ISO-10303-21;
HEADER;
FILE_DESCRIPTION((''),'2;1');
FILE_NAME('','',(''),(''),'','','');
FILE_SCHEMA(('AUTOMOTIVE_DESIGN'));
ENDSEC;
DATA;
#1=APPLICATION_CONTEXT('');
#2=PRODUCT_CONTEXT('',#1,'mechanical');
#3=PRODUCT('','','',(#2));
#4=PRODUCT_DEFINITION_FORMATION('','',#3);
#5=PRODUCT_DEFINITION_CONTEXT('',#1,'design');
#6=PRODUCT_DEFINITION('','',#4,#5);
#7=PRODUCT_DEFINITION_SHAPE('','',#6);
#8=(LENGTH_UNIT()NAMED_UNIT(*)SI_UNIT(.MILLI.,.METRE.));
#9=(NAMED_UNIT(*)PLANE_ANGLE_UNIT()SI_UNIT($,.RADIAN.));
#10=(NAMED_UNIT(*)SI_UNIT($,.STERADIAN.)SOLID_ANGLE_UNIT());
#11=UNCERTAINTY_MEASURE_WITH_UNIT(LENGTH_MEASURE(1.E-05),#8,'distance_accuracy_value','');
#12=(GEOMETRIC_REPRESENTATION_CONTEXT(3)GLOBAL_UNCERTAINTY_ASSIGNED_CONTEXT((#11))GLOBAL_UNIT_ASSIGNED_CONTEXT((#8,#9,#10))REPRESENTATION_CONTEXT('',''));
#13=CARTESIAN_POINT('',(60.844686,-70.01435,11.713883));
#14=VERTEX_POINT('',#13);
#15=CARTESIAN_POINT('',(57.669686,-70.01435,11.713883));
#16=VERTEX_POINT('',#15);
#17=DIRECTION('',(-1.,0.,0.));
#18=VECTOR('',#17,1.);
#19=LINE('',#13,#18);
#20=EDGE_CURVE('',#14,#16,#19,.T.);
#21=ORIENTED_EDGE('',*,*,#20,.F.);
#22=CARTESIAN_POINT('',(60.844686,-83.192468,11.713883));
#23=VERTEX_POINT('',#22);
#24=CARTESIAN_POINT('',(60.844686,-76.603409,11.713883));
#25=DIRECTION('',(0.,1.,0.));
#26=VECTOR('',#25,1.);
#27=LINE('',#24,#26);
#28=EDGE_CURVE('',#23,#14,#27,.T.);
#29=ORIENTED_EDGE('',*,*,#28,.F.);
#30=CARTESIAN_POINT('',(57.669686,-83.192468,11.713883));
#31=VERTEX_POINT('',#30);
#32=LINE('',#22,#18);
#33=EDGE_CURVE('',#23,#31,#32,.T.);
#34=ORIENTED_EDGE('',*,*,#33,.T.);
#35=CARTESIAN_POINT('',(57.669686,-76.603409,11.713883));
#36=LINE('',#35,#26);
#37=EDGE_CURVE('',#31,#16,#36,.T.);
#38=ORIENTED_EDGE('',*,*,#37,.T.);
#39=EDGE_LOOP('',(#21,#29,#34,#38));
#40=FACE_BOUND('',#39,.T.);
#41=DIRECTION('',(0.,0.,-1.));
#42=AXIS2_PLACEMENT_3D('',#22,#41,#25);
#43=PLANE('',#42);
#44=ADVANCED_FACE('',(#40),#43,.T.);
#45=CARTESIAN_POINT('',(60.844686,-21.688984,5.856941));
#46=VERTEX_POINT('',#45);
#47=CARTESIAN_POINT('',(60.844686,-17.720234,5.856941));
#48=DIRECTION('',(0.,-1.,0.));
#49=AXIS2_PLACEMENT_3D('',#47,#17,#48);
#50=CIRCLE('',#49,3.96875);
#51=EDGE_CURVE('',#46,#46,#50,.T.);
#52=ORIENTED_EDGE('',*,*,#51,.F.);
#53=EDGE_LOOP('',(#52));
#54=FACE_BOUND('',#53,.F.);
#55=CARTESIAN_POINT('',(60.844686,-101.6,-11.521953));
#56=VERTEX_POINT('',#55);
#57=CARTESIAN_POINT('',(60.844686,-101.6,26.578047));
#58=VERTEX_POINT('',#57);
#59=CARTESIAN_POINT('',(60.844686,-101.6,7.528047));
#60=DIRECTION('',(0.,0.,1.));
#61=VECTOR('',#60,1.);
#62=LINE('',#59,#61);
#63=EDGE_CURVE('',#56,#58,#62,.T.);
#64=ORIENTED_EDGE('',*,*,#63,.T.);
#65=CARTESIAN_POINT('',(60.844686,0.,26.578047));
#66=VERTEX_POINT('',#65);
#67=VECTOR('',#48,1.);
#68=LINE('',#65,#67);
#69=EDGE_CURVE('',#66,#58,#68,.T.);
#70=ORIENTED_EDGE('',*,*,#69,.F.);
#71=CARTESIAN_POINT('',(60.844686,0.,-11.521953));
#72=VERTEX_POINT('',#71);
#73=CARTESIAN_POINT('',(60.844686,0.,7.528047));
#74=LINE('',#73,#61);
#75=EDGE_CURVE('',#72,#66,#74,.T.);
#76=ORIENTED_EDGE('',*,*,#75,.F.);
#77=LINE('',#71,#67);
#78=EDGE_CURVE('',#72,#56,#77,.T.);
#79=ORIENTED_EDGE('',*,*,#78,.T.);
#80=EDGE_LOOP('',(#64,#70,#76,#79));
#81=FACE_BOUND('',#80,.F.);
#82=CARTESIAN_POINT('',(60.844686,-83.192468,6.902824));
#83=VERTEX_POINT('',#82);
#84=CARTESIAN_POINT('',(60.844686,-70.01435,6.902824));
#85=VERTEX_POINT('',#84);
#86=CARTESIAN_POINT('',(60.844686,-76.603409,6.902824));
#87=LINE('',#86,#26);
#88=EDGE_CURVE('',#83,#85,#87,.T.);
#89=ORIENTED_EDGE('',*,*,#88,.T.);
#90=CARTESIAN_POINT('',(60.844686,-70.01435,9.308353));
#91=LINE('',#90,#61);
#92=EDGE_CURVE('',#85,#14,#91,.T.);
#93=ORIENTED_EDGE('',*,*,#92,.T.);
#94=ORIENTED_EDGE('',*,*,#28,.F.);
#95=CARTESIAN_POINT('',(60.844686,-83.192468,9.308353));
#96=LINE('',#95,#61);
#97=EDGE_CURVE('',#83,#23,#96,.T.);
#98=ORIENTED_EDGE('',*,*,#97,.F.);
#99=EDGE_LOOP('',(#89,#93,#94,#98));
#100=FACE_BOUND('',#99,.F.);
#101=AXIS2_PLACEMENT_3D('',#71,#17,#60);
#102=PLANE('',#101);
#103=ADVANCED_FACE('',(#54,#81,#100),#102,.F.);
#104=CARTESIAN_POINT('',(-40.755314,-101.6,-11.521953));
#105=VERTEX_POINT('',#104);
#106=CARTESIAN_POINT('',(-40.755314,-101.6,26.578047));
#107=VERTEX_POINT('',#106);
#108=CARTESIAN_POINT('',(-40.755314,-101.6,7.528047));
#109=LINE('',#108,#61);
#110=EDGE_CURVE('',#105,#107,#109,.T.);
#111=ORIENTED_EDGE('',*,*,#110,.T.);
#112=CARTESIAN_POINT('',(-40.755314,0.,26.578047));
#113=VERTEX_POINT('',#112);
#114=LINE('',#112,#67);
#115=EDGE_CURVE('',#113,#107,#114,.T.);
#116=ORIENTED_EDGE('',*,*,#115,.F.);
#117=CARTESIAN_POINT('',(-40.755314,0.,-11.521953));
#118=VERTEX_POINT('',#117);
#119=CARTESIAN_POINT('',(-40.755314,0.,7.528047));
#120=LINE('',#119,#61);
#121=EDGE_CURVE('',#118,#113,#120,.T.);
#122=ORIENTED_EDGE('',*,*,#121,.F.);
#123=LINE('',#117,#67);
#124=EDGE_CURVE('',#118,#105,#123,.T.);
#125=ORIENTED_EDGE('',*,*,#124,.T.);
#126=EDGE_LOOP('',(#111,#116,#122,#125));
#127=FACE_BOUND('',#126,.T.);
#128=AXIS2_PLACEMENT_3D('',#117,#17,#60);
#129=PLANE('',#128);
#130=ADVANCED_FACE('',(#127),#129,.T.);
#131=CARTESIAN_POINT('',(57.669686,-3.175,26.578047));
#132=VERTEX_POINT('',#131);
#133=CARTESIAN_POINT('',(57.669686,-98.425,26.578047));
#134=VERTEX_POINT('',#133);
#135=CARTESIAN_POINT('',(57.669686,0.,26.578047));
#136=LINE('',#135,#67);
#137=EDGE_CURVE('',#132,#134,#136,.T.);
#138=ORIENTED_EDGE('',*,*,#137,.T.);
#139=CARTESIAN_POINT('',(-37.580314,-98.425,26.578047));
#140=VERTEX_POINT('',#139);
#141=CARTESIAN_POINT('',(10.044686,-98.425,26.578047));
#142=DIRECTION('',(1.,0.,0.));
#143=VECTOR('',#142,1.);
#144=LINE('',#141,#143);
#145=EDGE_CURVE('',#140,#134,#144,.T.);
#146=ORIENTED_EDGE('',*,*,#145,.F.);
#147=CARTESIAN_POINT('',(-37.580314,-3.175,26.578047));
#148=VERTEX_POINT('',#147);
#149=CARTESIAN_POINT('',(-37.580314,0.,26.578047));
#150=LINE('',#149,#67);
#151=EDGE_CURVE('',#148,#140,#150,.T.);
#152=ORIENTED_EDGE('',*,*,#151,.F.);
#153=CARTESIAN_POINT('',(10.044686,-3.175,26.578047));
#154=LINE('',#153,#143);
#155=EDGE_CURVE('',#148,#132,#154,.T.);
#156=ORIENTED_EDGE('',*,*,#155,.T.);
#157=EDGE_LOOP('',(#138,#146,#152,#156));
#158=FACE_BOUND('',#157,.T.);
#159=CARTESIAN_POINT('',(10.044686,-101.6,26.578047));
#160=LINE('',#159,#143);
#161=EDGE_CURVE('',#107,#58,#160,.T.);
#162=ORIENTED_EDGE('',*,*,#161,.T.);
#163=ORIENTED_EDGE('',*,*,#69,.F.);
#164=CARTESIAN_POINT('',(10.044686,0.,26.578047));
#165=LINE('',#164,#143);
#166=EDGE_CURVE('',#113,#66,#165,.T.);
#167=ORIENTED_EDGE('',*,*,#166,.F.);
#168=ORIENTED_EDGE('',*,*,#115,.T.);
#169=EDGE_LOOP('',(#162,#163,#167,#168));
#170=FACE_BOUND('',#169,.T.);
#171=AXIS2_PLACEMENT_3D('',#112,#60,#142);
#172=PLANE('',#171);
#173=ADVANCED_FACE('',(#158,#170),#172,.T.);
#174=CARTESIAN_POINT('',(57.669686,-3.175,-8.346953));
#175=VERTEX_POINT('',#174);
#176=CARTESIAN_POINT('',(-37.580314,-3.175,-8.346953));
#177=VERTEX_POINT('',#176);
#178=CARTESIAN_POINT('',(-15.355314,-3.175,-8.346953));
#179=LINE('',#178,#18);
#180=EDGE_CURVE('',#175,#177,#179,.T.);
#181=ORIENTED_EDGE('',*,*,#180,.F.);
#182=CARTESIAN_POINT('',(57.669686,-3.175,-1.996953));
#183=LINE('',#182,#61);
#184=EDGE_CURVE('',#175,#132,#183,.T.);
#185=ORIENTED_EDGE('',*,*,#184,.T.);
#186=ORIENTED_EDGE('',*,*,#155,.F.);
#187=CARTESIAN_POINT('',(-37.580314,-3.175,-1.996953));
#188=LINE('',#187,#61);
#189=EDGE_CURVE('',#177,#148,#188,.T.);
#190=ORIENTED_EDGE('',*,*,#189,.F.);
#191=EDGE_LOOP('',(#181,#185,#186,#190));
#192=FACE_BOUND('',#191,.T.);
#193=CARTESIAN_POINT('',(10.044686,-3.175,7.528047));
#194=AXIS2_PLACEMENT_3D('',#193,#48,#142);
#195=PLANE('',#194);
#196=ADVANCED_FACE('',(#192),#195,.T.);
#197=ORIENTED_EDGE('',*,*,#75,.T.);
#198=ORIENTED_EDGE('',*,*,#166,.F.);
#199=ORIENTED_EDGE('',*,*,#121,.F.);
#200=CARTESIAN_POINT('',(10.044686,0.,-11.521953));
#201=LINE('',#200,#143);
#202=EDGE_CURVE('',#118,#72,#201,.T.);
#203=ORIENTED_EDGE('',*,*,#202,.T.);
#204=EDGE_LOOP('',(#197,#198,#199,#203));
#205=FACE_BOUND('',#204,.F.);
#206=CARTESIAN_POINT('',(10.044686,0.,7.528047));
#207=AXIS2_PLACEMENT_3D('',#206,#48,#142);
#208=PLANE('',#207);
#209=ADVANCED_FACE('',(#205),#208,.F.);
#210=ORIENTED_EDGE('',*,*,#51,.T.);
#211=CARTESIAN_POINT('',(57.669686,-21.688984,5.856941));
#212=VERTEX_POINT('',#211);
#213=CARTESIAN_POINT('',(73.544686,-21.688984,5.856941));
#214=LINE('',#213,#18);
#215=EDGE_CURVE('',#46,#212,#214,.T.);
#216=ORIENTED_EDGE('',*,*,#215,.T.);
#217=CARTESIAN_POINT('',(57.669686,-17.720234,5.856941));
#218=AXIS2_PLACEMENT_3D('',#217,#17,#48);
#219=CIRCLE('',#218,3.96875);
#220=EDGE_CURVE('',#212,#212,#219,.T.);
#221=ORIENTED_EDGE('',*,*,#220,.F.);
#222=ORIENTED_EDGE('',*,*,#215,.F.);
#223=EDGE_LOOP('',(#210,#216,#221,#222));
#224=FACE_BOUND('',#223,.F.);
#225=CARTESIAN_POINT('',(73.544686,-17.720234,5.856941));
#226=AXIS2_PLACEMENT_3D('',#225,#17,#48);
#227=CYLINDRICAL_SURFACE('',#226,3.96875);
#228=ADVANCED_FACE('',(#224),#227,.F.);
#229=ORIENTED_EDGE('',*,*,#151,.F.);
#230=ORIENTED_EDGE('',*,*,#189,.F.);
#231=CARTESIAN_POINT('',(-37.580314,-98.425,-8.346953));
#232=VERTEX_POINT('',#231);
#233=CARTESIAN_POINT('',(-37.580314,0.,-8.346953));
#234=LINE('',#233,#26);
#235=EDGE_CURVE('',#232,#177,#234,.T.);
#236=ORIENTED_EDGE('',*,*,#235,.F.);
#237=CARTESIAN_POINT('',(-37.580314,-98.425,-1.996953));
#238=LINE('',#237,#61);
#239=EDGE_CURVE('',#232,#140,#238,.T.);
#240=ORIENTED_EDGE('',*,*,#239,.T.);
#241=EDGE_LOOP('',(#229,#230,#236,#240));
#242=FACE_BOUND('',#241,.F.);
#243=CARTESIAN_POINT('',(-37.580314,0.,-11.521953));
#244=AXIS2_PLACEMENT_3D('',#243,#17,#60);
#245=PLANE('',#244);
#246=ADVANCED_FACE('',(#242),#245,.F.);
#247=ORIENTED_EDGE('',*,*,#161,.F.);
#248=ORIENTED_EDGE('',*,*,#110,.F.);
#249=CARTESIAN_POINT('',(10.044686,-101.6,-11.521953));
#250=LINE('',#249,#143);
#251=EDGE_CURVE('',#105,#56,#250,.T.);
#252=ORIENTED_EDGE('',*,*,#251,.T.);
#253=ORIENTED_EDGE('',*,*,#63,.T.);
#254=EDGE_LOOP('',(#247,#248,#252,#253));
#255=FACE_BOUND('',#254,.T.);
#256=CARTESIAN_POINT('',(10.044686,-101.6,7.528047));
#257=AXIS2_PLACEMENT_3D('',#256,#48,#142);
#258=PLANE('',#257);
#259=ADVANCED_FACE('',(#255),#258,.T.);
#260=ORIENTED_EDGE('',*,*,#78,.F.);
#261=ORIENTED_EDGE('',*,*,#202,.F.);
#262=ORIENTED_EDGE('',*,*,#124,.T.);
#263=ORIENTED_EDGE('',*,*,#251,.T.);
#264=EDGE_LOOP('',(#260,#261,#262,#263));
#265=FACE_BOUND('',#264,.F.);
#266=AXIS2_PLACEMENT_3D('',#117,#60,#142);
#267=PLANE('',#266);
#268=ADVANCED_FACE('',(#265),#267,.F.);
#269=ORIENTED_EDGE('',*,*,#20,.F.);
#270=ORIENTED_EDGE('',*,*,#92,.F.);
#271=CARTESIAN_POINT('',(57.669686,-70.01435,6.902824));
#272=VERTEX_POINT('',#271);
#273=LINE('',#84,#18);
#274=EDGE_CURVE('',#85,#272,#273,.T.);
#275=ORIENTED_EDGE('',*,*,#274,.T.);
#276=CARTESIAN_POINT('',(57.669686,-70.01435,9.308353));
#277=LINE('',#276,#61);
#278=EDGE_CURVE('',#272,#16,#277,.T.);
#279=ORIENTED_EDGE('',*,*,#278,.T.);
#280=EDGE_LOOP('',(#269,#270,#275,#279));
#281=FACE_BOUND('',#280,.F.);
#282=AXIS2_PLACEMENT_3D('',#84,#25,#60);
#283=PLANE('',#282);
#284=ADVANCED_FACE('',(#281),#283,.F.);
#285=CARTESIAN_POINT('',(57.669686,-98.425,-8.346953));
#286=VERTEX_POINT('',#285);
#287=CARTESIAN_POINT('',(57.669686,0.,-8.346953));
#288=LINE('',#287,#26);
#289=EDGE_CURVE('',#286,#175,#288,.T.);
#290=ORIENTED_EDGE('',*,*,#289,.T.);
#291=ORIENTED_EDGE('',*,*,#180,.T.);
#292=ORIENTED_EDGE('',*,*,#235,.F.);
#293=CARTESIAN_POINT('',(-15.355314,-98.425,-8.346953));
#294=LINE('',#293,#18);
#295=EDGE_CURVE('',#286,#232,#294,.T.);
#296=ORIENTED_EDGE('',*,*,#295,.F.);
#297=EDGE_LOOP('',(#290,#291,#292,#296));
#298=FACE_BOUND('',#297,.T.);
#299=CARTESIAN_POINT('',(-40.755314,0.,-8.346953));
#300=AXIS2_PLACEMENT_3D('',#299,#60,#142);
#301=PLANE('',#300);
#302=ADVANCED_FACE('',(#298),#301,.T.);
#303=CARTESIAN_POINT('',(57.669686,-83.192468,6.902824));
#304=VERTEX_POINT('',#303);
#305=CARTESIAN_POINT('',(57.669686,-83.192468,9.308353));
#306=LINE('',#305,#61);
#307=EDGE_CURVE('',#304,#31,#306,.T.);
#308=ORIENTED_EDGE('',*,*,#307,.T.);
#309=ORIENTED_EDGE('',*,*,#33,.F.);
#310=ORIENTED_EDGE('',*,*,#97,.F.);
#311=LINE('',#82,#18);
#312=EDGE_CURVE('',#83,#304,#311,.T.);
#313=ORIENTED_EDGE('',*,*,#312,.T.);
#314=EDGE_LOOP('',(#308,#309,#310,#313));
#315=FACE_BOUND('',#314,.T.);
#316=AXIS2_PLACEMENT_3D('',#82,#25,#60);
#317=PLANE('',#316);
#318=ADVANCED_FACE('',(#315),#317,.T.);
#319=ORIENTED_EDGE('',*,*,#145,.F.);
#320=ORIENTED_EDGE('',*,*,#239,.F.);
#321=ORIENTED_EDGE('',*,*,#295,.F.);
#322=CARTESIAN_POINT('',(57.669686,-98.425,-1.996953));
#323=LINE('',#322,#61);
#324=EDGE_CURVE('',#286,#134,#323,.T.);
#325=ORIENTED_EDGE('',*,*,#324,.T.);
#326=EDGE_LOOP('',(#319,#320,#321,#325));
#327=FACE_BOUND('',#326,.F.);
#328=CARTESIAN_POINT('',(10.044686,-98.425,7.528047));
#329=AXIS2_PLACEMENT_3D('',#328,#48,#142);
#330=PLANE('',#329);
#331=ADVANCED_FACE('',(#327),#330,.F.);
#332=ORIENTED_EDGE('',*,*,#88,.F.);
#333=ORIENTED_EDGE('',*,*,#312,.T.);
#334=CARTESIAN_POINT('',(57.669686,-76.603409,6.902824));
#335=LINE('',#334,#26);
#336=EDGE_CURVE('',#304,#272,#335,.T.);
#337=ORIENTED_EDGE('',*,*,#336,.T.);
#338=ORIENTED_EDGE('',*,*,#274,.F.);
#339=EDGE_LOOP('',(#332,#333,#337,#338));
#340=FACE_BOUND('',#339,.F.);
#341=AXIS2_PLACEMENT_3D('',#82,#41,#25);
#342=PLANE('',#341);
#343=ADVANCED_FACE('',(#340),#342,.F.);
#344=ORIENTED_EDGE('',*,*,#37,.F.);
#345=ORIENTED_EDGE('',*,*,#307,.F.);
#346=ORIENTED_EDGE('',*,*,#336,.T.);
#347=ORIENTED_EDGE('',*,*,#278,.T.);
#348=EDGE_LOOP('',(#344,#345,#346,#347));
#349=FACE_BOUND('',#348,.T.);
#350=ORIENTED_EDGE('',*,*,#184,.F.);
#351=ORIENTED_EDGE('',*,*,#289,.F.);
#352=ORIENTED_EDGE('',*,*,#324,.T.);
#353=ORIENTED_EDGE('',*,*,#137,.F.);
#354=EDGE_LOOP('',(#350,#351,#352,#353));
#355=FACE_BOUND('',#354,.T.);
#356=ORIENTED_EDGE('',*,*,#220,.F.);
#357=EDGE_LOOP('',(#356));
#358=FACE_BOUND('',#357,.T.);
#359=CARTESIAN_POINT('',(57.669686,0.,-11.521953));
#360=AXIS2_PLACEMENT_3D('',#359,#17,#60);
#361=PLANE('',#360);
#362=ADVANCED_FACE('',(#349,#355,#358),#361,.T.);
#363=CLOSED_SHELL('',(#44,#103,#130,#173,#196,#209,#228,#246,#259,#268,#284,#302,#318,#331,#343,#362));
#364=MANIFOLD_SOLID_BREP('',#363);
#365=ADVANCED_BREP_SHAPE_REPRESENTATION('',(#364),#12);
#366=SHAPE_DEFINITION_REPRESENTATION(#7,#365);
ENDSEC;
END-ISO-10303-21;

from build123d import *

# Parameters (mm, degrees)
F0_W     = 101.6
F0_H     = 38.1
F1_DEPTH = 101.6
F2_T     = -3.175
F4_D     = 7.9375
F4_DEPTH = 12.7
F4_TIP   = 2.3846655818
F3_W     = 13.1781175733
F3_H     = 4.8110592179
F5_DEPTH = 3.175


# Not quite as in the source:
# - a length typed as a fraction of an inch, garbled in the dataset ("3 / 203.2 mm" for 3/8 in), is restored


with BuildPart() as f1:
    # F0 (on Front) → F1 (new body)
    with BuildSketch(Plane.XZ):
        with Locations((10.0446864963, 7.5280469467)):
            Rectangle(F0_W, F0_H)
    extrude(amount=F1_DEPTH)

    # F2
    f2_openings = [f1.faces().sort_by_distance(p)[0] for p in [
        (10.044686, -50.8, 26.578047),
    ]]
    offset(amount=F2_T, openings=f2_openings)

    # F4
    with Locations(Plane.YZ.offset(60.8446864963)):
        with Locations((-17.720233649, 5.8569414541)):
            Hole(F4_D / 2, depth=F4_DEPTH)
            with Locations((0, 0, -(F4_DEPTH + F4_TIP / 2))):  # 118° drill point
                Cone(0, F4_D / 2, F4_TIP, mode=Mode.SUBTRACT)

    # F3 (on face) → F5 (cut, through all)
    with BuildSketch(Plane.YZ.offset(60.8446864963)):
        with Locations((-76.6034089029, 9.3083532993)):
            Rectangle(F3_W, F3_H)
    extrude(amount=-F5_DEPTH, mode=Mode.SUBTRACT)


solid = f1.part
